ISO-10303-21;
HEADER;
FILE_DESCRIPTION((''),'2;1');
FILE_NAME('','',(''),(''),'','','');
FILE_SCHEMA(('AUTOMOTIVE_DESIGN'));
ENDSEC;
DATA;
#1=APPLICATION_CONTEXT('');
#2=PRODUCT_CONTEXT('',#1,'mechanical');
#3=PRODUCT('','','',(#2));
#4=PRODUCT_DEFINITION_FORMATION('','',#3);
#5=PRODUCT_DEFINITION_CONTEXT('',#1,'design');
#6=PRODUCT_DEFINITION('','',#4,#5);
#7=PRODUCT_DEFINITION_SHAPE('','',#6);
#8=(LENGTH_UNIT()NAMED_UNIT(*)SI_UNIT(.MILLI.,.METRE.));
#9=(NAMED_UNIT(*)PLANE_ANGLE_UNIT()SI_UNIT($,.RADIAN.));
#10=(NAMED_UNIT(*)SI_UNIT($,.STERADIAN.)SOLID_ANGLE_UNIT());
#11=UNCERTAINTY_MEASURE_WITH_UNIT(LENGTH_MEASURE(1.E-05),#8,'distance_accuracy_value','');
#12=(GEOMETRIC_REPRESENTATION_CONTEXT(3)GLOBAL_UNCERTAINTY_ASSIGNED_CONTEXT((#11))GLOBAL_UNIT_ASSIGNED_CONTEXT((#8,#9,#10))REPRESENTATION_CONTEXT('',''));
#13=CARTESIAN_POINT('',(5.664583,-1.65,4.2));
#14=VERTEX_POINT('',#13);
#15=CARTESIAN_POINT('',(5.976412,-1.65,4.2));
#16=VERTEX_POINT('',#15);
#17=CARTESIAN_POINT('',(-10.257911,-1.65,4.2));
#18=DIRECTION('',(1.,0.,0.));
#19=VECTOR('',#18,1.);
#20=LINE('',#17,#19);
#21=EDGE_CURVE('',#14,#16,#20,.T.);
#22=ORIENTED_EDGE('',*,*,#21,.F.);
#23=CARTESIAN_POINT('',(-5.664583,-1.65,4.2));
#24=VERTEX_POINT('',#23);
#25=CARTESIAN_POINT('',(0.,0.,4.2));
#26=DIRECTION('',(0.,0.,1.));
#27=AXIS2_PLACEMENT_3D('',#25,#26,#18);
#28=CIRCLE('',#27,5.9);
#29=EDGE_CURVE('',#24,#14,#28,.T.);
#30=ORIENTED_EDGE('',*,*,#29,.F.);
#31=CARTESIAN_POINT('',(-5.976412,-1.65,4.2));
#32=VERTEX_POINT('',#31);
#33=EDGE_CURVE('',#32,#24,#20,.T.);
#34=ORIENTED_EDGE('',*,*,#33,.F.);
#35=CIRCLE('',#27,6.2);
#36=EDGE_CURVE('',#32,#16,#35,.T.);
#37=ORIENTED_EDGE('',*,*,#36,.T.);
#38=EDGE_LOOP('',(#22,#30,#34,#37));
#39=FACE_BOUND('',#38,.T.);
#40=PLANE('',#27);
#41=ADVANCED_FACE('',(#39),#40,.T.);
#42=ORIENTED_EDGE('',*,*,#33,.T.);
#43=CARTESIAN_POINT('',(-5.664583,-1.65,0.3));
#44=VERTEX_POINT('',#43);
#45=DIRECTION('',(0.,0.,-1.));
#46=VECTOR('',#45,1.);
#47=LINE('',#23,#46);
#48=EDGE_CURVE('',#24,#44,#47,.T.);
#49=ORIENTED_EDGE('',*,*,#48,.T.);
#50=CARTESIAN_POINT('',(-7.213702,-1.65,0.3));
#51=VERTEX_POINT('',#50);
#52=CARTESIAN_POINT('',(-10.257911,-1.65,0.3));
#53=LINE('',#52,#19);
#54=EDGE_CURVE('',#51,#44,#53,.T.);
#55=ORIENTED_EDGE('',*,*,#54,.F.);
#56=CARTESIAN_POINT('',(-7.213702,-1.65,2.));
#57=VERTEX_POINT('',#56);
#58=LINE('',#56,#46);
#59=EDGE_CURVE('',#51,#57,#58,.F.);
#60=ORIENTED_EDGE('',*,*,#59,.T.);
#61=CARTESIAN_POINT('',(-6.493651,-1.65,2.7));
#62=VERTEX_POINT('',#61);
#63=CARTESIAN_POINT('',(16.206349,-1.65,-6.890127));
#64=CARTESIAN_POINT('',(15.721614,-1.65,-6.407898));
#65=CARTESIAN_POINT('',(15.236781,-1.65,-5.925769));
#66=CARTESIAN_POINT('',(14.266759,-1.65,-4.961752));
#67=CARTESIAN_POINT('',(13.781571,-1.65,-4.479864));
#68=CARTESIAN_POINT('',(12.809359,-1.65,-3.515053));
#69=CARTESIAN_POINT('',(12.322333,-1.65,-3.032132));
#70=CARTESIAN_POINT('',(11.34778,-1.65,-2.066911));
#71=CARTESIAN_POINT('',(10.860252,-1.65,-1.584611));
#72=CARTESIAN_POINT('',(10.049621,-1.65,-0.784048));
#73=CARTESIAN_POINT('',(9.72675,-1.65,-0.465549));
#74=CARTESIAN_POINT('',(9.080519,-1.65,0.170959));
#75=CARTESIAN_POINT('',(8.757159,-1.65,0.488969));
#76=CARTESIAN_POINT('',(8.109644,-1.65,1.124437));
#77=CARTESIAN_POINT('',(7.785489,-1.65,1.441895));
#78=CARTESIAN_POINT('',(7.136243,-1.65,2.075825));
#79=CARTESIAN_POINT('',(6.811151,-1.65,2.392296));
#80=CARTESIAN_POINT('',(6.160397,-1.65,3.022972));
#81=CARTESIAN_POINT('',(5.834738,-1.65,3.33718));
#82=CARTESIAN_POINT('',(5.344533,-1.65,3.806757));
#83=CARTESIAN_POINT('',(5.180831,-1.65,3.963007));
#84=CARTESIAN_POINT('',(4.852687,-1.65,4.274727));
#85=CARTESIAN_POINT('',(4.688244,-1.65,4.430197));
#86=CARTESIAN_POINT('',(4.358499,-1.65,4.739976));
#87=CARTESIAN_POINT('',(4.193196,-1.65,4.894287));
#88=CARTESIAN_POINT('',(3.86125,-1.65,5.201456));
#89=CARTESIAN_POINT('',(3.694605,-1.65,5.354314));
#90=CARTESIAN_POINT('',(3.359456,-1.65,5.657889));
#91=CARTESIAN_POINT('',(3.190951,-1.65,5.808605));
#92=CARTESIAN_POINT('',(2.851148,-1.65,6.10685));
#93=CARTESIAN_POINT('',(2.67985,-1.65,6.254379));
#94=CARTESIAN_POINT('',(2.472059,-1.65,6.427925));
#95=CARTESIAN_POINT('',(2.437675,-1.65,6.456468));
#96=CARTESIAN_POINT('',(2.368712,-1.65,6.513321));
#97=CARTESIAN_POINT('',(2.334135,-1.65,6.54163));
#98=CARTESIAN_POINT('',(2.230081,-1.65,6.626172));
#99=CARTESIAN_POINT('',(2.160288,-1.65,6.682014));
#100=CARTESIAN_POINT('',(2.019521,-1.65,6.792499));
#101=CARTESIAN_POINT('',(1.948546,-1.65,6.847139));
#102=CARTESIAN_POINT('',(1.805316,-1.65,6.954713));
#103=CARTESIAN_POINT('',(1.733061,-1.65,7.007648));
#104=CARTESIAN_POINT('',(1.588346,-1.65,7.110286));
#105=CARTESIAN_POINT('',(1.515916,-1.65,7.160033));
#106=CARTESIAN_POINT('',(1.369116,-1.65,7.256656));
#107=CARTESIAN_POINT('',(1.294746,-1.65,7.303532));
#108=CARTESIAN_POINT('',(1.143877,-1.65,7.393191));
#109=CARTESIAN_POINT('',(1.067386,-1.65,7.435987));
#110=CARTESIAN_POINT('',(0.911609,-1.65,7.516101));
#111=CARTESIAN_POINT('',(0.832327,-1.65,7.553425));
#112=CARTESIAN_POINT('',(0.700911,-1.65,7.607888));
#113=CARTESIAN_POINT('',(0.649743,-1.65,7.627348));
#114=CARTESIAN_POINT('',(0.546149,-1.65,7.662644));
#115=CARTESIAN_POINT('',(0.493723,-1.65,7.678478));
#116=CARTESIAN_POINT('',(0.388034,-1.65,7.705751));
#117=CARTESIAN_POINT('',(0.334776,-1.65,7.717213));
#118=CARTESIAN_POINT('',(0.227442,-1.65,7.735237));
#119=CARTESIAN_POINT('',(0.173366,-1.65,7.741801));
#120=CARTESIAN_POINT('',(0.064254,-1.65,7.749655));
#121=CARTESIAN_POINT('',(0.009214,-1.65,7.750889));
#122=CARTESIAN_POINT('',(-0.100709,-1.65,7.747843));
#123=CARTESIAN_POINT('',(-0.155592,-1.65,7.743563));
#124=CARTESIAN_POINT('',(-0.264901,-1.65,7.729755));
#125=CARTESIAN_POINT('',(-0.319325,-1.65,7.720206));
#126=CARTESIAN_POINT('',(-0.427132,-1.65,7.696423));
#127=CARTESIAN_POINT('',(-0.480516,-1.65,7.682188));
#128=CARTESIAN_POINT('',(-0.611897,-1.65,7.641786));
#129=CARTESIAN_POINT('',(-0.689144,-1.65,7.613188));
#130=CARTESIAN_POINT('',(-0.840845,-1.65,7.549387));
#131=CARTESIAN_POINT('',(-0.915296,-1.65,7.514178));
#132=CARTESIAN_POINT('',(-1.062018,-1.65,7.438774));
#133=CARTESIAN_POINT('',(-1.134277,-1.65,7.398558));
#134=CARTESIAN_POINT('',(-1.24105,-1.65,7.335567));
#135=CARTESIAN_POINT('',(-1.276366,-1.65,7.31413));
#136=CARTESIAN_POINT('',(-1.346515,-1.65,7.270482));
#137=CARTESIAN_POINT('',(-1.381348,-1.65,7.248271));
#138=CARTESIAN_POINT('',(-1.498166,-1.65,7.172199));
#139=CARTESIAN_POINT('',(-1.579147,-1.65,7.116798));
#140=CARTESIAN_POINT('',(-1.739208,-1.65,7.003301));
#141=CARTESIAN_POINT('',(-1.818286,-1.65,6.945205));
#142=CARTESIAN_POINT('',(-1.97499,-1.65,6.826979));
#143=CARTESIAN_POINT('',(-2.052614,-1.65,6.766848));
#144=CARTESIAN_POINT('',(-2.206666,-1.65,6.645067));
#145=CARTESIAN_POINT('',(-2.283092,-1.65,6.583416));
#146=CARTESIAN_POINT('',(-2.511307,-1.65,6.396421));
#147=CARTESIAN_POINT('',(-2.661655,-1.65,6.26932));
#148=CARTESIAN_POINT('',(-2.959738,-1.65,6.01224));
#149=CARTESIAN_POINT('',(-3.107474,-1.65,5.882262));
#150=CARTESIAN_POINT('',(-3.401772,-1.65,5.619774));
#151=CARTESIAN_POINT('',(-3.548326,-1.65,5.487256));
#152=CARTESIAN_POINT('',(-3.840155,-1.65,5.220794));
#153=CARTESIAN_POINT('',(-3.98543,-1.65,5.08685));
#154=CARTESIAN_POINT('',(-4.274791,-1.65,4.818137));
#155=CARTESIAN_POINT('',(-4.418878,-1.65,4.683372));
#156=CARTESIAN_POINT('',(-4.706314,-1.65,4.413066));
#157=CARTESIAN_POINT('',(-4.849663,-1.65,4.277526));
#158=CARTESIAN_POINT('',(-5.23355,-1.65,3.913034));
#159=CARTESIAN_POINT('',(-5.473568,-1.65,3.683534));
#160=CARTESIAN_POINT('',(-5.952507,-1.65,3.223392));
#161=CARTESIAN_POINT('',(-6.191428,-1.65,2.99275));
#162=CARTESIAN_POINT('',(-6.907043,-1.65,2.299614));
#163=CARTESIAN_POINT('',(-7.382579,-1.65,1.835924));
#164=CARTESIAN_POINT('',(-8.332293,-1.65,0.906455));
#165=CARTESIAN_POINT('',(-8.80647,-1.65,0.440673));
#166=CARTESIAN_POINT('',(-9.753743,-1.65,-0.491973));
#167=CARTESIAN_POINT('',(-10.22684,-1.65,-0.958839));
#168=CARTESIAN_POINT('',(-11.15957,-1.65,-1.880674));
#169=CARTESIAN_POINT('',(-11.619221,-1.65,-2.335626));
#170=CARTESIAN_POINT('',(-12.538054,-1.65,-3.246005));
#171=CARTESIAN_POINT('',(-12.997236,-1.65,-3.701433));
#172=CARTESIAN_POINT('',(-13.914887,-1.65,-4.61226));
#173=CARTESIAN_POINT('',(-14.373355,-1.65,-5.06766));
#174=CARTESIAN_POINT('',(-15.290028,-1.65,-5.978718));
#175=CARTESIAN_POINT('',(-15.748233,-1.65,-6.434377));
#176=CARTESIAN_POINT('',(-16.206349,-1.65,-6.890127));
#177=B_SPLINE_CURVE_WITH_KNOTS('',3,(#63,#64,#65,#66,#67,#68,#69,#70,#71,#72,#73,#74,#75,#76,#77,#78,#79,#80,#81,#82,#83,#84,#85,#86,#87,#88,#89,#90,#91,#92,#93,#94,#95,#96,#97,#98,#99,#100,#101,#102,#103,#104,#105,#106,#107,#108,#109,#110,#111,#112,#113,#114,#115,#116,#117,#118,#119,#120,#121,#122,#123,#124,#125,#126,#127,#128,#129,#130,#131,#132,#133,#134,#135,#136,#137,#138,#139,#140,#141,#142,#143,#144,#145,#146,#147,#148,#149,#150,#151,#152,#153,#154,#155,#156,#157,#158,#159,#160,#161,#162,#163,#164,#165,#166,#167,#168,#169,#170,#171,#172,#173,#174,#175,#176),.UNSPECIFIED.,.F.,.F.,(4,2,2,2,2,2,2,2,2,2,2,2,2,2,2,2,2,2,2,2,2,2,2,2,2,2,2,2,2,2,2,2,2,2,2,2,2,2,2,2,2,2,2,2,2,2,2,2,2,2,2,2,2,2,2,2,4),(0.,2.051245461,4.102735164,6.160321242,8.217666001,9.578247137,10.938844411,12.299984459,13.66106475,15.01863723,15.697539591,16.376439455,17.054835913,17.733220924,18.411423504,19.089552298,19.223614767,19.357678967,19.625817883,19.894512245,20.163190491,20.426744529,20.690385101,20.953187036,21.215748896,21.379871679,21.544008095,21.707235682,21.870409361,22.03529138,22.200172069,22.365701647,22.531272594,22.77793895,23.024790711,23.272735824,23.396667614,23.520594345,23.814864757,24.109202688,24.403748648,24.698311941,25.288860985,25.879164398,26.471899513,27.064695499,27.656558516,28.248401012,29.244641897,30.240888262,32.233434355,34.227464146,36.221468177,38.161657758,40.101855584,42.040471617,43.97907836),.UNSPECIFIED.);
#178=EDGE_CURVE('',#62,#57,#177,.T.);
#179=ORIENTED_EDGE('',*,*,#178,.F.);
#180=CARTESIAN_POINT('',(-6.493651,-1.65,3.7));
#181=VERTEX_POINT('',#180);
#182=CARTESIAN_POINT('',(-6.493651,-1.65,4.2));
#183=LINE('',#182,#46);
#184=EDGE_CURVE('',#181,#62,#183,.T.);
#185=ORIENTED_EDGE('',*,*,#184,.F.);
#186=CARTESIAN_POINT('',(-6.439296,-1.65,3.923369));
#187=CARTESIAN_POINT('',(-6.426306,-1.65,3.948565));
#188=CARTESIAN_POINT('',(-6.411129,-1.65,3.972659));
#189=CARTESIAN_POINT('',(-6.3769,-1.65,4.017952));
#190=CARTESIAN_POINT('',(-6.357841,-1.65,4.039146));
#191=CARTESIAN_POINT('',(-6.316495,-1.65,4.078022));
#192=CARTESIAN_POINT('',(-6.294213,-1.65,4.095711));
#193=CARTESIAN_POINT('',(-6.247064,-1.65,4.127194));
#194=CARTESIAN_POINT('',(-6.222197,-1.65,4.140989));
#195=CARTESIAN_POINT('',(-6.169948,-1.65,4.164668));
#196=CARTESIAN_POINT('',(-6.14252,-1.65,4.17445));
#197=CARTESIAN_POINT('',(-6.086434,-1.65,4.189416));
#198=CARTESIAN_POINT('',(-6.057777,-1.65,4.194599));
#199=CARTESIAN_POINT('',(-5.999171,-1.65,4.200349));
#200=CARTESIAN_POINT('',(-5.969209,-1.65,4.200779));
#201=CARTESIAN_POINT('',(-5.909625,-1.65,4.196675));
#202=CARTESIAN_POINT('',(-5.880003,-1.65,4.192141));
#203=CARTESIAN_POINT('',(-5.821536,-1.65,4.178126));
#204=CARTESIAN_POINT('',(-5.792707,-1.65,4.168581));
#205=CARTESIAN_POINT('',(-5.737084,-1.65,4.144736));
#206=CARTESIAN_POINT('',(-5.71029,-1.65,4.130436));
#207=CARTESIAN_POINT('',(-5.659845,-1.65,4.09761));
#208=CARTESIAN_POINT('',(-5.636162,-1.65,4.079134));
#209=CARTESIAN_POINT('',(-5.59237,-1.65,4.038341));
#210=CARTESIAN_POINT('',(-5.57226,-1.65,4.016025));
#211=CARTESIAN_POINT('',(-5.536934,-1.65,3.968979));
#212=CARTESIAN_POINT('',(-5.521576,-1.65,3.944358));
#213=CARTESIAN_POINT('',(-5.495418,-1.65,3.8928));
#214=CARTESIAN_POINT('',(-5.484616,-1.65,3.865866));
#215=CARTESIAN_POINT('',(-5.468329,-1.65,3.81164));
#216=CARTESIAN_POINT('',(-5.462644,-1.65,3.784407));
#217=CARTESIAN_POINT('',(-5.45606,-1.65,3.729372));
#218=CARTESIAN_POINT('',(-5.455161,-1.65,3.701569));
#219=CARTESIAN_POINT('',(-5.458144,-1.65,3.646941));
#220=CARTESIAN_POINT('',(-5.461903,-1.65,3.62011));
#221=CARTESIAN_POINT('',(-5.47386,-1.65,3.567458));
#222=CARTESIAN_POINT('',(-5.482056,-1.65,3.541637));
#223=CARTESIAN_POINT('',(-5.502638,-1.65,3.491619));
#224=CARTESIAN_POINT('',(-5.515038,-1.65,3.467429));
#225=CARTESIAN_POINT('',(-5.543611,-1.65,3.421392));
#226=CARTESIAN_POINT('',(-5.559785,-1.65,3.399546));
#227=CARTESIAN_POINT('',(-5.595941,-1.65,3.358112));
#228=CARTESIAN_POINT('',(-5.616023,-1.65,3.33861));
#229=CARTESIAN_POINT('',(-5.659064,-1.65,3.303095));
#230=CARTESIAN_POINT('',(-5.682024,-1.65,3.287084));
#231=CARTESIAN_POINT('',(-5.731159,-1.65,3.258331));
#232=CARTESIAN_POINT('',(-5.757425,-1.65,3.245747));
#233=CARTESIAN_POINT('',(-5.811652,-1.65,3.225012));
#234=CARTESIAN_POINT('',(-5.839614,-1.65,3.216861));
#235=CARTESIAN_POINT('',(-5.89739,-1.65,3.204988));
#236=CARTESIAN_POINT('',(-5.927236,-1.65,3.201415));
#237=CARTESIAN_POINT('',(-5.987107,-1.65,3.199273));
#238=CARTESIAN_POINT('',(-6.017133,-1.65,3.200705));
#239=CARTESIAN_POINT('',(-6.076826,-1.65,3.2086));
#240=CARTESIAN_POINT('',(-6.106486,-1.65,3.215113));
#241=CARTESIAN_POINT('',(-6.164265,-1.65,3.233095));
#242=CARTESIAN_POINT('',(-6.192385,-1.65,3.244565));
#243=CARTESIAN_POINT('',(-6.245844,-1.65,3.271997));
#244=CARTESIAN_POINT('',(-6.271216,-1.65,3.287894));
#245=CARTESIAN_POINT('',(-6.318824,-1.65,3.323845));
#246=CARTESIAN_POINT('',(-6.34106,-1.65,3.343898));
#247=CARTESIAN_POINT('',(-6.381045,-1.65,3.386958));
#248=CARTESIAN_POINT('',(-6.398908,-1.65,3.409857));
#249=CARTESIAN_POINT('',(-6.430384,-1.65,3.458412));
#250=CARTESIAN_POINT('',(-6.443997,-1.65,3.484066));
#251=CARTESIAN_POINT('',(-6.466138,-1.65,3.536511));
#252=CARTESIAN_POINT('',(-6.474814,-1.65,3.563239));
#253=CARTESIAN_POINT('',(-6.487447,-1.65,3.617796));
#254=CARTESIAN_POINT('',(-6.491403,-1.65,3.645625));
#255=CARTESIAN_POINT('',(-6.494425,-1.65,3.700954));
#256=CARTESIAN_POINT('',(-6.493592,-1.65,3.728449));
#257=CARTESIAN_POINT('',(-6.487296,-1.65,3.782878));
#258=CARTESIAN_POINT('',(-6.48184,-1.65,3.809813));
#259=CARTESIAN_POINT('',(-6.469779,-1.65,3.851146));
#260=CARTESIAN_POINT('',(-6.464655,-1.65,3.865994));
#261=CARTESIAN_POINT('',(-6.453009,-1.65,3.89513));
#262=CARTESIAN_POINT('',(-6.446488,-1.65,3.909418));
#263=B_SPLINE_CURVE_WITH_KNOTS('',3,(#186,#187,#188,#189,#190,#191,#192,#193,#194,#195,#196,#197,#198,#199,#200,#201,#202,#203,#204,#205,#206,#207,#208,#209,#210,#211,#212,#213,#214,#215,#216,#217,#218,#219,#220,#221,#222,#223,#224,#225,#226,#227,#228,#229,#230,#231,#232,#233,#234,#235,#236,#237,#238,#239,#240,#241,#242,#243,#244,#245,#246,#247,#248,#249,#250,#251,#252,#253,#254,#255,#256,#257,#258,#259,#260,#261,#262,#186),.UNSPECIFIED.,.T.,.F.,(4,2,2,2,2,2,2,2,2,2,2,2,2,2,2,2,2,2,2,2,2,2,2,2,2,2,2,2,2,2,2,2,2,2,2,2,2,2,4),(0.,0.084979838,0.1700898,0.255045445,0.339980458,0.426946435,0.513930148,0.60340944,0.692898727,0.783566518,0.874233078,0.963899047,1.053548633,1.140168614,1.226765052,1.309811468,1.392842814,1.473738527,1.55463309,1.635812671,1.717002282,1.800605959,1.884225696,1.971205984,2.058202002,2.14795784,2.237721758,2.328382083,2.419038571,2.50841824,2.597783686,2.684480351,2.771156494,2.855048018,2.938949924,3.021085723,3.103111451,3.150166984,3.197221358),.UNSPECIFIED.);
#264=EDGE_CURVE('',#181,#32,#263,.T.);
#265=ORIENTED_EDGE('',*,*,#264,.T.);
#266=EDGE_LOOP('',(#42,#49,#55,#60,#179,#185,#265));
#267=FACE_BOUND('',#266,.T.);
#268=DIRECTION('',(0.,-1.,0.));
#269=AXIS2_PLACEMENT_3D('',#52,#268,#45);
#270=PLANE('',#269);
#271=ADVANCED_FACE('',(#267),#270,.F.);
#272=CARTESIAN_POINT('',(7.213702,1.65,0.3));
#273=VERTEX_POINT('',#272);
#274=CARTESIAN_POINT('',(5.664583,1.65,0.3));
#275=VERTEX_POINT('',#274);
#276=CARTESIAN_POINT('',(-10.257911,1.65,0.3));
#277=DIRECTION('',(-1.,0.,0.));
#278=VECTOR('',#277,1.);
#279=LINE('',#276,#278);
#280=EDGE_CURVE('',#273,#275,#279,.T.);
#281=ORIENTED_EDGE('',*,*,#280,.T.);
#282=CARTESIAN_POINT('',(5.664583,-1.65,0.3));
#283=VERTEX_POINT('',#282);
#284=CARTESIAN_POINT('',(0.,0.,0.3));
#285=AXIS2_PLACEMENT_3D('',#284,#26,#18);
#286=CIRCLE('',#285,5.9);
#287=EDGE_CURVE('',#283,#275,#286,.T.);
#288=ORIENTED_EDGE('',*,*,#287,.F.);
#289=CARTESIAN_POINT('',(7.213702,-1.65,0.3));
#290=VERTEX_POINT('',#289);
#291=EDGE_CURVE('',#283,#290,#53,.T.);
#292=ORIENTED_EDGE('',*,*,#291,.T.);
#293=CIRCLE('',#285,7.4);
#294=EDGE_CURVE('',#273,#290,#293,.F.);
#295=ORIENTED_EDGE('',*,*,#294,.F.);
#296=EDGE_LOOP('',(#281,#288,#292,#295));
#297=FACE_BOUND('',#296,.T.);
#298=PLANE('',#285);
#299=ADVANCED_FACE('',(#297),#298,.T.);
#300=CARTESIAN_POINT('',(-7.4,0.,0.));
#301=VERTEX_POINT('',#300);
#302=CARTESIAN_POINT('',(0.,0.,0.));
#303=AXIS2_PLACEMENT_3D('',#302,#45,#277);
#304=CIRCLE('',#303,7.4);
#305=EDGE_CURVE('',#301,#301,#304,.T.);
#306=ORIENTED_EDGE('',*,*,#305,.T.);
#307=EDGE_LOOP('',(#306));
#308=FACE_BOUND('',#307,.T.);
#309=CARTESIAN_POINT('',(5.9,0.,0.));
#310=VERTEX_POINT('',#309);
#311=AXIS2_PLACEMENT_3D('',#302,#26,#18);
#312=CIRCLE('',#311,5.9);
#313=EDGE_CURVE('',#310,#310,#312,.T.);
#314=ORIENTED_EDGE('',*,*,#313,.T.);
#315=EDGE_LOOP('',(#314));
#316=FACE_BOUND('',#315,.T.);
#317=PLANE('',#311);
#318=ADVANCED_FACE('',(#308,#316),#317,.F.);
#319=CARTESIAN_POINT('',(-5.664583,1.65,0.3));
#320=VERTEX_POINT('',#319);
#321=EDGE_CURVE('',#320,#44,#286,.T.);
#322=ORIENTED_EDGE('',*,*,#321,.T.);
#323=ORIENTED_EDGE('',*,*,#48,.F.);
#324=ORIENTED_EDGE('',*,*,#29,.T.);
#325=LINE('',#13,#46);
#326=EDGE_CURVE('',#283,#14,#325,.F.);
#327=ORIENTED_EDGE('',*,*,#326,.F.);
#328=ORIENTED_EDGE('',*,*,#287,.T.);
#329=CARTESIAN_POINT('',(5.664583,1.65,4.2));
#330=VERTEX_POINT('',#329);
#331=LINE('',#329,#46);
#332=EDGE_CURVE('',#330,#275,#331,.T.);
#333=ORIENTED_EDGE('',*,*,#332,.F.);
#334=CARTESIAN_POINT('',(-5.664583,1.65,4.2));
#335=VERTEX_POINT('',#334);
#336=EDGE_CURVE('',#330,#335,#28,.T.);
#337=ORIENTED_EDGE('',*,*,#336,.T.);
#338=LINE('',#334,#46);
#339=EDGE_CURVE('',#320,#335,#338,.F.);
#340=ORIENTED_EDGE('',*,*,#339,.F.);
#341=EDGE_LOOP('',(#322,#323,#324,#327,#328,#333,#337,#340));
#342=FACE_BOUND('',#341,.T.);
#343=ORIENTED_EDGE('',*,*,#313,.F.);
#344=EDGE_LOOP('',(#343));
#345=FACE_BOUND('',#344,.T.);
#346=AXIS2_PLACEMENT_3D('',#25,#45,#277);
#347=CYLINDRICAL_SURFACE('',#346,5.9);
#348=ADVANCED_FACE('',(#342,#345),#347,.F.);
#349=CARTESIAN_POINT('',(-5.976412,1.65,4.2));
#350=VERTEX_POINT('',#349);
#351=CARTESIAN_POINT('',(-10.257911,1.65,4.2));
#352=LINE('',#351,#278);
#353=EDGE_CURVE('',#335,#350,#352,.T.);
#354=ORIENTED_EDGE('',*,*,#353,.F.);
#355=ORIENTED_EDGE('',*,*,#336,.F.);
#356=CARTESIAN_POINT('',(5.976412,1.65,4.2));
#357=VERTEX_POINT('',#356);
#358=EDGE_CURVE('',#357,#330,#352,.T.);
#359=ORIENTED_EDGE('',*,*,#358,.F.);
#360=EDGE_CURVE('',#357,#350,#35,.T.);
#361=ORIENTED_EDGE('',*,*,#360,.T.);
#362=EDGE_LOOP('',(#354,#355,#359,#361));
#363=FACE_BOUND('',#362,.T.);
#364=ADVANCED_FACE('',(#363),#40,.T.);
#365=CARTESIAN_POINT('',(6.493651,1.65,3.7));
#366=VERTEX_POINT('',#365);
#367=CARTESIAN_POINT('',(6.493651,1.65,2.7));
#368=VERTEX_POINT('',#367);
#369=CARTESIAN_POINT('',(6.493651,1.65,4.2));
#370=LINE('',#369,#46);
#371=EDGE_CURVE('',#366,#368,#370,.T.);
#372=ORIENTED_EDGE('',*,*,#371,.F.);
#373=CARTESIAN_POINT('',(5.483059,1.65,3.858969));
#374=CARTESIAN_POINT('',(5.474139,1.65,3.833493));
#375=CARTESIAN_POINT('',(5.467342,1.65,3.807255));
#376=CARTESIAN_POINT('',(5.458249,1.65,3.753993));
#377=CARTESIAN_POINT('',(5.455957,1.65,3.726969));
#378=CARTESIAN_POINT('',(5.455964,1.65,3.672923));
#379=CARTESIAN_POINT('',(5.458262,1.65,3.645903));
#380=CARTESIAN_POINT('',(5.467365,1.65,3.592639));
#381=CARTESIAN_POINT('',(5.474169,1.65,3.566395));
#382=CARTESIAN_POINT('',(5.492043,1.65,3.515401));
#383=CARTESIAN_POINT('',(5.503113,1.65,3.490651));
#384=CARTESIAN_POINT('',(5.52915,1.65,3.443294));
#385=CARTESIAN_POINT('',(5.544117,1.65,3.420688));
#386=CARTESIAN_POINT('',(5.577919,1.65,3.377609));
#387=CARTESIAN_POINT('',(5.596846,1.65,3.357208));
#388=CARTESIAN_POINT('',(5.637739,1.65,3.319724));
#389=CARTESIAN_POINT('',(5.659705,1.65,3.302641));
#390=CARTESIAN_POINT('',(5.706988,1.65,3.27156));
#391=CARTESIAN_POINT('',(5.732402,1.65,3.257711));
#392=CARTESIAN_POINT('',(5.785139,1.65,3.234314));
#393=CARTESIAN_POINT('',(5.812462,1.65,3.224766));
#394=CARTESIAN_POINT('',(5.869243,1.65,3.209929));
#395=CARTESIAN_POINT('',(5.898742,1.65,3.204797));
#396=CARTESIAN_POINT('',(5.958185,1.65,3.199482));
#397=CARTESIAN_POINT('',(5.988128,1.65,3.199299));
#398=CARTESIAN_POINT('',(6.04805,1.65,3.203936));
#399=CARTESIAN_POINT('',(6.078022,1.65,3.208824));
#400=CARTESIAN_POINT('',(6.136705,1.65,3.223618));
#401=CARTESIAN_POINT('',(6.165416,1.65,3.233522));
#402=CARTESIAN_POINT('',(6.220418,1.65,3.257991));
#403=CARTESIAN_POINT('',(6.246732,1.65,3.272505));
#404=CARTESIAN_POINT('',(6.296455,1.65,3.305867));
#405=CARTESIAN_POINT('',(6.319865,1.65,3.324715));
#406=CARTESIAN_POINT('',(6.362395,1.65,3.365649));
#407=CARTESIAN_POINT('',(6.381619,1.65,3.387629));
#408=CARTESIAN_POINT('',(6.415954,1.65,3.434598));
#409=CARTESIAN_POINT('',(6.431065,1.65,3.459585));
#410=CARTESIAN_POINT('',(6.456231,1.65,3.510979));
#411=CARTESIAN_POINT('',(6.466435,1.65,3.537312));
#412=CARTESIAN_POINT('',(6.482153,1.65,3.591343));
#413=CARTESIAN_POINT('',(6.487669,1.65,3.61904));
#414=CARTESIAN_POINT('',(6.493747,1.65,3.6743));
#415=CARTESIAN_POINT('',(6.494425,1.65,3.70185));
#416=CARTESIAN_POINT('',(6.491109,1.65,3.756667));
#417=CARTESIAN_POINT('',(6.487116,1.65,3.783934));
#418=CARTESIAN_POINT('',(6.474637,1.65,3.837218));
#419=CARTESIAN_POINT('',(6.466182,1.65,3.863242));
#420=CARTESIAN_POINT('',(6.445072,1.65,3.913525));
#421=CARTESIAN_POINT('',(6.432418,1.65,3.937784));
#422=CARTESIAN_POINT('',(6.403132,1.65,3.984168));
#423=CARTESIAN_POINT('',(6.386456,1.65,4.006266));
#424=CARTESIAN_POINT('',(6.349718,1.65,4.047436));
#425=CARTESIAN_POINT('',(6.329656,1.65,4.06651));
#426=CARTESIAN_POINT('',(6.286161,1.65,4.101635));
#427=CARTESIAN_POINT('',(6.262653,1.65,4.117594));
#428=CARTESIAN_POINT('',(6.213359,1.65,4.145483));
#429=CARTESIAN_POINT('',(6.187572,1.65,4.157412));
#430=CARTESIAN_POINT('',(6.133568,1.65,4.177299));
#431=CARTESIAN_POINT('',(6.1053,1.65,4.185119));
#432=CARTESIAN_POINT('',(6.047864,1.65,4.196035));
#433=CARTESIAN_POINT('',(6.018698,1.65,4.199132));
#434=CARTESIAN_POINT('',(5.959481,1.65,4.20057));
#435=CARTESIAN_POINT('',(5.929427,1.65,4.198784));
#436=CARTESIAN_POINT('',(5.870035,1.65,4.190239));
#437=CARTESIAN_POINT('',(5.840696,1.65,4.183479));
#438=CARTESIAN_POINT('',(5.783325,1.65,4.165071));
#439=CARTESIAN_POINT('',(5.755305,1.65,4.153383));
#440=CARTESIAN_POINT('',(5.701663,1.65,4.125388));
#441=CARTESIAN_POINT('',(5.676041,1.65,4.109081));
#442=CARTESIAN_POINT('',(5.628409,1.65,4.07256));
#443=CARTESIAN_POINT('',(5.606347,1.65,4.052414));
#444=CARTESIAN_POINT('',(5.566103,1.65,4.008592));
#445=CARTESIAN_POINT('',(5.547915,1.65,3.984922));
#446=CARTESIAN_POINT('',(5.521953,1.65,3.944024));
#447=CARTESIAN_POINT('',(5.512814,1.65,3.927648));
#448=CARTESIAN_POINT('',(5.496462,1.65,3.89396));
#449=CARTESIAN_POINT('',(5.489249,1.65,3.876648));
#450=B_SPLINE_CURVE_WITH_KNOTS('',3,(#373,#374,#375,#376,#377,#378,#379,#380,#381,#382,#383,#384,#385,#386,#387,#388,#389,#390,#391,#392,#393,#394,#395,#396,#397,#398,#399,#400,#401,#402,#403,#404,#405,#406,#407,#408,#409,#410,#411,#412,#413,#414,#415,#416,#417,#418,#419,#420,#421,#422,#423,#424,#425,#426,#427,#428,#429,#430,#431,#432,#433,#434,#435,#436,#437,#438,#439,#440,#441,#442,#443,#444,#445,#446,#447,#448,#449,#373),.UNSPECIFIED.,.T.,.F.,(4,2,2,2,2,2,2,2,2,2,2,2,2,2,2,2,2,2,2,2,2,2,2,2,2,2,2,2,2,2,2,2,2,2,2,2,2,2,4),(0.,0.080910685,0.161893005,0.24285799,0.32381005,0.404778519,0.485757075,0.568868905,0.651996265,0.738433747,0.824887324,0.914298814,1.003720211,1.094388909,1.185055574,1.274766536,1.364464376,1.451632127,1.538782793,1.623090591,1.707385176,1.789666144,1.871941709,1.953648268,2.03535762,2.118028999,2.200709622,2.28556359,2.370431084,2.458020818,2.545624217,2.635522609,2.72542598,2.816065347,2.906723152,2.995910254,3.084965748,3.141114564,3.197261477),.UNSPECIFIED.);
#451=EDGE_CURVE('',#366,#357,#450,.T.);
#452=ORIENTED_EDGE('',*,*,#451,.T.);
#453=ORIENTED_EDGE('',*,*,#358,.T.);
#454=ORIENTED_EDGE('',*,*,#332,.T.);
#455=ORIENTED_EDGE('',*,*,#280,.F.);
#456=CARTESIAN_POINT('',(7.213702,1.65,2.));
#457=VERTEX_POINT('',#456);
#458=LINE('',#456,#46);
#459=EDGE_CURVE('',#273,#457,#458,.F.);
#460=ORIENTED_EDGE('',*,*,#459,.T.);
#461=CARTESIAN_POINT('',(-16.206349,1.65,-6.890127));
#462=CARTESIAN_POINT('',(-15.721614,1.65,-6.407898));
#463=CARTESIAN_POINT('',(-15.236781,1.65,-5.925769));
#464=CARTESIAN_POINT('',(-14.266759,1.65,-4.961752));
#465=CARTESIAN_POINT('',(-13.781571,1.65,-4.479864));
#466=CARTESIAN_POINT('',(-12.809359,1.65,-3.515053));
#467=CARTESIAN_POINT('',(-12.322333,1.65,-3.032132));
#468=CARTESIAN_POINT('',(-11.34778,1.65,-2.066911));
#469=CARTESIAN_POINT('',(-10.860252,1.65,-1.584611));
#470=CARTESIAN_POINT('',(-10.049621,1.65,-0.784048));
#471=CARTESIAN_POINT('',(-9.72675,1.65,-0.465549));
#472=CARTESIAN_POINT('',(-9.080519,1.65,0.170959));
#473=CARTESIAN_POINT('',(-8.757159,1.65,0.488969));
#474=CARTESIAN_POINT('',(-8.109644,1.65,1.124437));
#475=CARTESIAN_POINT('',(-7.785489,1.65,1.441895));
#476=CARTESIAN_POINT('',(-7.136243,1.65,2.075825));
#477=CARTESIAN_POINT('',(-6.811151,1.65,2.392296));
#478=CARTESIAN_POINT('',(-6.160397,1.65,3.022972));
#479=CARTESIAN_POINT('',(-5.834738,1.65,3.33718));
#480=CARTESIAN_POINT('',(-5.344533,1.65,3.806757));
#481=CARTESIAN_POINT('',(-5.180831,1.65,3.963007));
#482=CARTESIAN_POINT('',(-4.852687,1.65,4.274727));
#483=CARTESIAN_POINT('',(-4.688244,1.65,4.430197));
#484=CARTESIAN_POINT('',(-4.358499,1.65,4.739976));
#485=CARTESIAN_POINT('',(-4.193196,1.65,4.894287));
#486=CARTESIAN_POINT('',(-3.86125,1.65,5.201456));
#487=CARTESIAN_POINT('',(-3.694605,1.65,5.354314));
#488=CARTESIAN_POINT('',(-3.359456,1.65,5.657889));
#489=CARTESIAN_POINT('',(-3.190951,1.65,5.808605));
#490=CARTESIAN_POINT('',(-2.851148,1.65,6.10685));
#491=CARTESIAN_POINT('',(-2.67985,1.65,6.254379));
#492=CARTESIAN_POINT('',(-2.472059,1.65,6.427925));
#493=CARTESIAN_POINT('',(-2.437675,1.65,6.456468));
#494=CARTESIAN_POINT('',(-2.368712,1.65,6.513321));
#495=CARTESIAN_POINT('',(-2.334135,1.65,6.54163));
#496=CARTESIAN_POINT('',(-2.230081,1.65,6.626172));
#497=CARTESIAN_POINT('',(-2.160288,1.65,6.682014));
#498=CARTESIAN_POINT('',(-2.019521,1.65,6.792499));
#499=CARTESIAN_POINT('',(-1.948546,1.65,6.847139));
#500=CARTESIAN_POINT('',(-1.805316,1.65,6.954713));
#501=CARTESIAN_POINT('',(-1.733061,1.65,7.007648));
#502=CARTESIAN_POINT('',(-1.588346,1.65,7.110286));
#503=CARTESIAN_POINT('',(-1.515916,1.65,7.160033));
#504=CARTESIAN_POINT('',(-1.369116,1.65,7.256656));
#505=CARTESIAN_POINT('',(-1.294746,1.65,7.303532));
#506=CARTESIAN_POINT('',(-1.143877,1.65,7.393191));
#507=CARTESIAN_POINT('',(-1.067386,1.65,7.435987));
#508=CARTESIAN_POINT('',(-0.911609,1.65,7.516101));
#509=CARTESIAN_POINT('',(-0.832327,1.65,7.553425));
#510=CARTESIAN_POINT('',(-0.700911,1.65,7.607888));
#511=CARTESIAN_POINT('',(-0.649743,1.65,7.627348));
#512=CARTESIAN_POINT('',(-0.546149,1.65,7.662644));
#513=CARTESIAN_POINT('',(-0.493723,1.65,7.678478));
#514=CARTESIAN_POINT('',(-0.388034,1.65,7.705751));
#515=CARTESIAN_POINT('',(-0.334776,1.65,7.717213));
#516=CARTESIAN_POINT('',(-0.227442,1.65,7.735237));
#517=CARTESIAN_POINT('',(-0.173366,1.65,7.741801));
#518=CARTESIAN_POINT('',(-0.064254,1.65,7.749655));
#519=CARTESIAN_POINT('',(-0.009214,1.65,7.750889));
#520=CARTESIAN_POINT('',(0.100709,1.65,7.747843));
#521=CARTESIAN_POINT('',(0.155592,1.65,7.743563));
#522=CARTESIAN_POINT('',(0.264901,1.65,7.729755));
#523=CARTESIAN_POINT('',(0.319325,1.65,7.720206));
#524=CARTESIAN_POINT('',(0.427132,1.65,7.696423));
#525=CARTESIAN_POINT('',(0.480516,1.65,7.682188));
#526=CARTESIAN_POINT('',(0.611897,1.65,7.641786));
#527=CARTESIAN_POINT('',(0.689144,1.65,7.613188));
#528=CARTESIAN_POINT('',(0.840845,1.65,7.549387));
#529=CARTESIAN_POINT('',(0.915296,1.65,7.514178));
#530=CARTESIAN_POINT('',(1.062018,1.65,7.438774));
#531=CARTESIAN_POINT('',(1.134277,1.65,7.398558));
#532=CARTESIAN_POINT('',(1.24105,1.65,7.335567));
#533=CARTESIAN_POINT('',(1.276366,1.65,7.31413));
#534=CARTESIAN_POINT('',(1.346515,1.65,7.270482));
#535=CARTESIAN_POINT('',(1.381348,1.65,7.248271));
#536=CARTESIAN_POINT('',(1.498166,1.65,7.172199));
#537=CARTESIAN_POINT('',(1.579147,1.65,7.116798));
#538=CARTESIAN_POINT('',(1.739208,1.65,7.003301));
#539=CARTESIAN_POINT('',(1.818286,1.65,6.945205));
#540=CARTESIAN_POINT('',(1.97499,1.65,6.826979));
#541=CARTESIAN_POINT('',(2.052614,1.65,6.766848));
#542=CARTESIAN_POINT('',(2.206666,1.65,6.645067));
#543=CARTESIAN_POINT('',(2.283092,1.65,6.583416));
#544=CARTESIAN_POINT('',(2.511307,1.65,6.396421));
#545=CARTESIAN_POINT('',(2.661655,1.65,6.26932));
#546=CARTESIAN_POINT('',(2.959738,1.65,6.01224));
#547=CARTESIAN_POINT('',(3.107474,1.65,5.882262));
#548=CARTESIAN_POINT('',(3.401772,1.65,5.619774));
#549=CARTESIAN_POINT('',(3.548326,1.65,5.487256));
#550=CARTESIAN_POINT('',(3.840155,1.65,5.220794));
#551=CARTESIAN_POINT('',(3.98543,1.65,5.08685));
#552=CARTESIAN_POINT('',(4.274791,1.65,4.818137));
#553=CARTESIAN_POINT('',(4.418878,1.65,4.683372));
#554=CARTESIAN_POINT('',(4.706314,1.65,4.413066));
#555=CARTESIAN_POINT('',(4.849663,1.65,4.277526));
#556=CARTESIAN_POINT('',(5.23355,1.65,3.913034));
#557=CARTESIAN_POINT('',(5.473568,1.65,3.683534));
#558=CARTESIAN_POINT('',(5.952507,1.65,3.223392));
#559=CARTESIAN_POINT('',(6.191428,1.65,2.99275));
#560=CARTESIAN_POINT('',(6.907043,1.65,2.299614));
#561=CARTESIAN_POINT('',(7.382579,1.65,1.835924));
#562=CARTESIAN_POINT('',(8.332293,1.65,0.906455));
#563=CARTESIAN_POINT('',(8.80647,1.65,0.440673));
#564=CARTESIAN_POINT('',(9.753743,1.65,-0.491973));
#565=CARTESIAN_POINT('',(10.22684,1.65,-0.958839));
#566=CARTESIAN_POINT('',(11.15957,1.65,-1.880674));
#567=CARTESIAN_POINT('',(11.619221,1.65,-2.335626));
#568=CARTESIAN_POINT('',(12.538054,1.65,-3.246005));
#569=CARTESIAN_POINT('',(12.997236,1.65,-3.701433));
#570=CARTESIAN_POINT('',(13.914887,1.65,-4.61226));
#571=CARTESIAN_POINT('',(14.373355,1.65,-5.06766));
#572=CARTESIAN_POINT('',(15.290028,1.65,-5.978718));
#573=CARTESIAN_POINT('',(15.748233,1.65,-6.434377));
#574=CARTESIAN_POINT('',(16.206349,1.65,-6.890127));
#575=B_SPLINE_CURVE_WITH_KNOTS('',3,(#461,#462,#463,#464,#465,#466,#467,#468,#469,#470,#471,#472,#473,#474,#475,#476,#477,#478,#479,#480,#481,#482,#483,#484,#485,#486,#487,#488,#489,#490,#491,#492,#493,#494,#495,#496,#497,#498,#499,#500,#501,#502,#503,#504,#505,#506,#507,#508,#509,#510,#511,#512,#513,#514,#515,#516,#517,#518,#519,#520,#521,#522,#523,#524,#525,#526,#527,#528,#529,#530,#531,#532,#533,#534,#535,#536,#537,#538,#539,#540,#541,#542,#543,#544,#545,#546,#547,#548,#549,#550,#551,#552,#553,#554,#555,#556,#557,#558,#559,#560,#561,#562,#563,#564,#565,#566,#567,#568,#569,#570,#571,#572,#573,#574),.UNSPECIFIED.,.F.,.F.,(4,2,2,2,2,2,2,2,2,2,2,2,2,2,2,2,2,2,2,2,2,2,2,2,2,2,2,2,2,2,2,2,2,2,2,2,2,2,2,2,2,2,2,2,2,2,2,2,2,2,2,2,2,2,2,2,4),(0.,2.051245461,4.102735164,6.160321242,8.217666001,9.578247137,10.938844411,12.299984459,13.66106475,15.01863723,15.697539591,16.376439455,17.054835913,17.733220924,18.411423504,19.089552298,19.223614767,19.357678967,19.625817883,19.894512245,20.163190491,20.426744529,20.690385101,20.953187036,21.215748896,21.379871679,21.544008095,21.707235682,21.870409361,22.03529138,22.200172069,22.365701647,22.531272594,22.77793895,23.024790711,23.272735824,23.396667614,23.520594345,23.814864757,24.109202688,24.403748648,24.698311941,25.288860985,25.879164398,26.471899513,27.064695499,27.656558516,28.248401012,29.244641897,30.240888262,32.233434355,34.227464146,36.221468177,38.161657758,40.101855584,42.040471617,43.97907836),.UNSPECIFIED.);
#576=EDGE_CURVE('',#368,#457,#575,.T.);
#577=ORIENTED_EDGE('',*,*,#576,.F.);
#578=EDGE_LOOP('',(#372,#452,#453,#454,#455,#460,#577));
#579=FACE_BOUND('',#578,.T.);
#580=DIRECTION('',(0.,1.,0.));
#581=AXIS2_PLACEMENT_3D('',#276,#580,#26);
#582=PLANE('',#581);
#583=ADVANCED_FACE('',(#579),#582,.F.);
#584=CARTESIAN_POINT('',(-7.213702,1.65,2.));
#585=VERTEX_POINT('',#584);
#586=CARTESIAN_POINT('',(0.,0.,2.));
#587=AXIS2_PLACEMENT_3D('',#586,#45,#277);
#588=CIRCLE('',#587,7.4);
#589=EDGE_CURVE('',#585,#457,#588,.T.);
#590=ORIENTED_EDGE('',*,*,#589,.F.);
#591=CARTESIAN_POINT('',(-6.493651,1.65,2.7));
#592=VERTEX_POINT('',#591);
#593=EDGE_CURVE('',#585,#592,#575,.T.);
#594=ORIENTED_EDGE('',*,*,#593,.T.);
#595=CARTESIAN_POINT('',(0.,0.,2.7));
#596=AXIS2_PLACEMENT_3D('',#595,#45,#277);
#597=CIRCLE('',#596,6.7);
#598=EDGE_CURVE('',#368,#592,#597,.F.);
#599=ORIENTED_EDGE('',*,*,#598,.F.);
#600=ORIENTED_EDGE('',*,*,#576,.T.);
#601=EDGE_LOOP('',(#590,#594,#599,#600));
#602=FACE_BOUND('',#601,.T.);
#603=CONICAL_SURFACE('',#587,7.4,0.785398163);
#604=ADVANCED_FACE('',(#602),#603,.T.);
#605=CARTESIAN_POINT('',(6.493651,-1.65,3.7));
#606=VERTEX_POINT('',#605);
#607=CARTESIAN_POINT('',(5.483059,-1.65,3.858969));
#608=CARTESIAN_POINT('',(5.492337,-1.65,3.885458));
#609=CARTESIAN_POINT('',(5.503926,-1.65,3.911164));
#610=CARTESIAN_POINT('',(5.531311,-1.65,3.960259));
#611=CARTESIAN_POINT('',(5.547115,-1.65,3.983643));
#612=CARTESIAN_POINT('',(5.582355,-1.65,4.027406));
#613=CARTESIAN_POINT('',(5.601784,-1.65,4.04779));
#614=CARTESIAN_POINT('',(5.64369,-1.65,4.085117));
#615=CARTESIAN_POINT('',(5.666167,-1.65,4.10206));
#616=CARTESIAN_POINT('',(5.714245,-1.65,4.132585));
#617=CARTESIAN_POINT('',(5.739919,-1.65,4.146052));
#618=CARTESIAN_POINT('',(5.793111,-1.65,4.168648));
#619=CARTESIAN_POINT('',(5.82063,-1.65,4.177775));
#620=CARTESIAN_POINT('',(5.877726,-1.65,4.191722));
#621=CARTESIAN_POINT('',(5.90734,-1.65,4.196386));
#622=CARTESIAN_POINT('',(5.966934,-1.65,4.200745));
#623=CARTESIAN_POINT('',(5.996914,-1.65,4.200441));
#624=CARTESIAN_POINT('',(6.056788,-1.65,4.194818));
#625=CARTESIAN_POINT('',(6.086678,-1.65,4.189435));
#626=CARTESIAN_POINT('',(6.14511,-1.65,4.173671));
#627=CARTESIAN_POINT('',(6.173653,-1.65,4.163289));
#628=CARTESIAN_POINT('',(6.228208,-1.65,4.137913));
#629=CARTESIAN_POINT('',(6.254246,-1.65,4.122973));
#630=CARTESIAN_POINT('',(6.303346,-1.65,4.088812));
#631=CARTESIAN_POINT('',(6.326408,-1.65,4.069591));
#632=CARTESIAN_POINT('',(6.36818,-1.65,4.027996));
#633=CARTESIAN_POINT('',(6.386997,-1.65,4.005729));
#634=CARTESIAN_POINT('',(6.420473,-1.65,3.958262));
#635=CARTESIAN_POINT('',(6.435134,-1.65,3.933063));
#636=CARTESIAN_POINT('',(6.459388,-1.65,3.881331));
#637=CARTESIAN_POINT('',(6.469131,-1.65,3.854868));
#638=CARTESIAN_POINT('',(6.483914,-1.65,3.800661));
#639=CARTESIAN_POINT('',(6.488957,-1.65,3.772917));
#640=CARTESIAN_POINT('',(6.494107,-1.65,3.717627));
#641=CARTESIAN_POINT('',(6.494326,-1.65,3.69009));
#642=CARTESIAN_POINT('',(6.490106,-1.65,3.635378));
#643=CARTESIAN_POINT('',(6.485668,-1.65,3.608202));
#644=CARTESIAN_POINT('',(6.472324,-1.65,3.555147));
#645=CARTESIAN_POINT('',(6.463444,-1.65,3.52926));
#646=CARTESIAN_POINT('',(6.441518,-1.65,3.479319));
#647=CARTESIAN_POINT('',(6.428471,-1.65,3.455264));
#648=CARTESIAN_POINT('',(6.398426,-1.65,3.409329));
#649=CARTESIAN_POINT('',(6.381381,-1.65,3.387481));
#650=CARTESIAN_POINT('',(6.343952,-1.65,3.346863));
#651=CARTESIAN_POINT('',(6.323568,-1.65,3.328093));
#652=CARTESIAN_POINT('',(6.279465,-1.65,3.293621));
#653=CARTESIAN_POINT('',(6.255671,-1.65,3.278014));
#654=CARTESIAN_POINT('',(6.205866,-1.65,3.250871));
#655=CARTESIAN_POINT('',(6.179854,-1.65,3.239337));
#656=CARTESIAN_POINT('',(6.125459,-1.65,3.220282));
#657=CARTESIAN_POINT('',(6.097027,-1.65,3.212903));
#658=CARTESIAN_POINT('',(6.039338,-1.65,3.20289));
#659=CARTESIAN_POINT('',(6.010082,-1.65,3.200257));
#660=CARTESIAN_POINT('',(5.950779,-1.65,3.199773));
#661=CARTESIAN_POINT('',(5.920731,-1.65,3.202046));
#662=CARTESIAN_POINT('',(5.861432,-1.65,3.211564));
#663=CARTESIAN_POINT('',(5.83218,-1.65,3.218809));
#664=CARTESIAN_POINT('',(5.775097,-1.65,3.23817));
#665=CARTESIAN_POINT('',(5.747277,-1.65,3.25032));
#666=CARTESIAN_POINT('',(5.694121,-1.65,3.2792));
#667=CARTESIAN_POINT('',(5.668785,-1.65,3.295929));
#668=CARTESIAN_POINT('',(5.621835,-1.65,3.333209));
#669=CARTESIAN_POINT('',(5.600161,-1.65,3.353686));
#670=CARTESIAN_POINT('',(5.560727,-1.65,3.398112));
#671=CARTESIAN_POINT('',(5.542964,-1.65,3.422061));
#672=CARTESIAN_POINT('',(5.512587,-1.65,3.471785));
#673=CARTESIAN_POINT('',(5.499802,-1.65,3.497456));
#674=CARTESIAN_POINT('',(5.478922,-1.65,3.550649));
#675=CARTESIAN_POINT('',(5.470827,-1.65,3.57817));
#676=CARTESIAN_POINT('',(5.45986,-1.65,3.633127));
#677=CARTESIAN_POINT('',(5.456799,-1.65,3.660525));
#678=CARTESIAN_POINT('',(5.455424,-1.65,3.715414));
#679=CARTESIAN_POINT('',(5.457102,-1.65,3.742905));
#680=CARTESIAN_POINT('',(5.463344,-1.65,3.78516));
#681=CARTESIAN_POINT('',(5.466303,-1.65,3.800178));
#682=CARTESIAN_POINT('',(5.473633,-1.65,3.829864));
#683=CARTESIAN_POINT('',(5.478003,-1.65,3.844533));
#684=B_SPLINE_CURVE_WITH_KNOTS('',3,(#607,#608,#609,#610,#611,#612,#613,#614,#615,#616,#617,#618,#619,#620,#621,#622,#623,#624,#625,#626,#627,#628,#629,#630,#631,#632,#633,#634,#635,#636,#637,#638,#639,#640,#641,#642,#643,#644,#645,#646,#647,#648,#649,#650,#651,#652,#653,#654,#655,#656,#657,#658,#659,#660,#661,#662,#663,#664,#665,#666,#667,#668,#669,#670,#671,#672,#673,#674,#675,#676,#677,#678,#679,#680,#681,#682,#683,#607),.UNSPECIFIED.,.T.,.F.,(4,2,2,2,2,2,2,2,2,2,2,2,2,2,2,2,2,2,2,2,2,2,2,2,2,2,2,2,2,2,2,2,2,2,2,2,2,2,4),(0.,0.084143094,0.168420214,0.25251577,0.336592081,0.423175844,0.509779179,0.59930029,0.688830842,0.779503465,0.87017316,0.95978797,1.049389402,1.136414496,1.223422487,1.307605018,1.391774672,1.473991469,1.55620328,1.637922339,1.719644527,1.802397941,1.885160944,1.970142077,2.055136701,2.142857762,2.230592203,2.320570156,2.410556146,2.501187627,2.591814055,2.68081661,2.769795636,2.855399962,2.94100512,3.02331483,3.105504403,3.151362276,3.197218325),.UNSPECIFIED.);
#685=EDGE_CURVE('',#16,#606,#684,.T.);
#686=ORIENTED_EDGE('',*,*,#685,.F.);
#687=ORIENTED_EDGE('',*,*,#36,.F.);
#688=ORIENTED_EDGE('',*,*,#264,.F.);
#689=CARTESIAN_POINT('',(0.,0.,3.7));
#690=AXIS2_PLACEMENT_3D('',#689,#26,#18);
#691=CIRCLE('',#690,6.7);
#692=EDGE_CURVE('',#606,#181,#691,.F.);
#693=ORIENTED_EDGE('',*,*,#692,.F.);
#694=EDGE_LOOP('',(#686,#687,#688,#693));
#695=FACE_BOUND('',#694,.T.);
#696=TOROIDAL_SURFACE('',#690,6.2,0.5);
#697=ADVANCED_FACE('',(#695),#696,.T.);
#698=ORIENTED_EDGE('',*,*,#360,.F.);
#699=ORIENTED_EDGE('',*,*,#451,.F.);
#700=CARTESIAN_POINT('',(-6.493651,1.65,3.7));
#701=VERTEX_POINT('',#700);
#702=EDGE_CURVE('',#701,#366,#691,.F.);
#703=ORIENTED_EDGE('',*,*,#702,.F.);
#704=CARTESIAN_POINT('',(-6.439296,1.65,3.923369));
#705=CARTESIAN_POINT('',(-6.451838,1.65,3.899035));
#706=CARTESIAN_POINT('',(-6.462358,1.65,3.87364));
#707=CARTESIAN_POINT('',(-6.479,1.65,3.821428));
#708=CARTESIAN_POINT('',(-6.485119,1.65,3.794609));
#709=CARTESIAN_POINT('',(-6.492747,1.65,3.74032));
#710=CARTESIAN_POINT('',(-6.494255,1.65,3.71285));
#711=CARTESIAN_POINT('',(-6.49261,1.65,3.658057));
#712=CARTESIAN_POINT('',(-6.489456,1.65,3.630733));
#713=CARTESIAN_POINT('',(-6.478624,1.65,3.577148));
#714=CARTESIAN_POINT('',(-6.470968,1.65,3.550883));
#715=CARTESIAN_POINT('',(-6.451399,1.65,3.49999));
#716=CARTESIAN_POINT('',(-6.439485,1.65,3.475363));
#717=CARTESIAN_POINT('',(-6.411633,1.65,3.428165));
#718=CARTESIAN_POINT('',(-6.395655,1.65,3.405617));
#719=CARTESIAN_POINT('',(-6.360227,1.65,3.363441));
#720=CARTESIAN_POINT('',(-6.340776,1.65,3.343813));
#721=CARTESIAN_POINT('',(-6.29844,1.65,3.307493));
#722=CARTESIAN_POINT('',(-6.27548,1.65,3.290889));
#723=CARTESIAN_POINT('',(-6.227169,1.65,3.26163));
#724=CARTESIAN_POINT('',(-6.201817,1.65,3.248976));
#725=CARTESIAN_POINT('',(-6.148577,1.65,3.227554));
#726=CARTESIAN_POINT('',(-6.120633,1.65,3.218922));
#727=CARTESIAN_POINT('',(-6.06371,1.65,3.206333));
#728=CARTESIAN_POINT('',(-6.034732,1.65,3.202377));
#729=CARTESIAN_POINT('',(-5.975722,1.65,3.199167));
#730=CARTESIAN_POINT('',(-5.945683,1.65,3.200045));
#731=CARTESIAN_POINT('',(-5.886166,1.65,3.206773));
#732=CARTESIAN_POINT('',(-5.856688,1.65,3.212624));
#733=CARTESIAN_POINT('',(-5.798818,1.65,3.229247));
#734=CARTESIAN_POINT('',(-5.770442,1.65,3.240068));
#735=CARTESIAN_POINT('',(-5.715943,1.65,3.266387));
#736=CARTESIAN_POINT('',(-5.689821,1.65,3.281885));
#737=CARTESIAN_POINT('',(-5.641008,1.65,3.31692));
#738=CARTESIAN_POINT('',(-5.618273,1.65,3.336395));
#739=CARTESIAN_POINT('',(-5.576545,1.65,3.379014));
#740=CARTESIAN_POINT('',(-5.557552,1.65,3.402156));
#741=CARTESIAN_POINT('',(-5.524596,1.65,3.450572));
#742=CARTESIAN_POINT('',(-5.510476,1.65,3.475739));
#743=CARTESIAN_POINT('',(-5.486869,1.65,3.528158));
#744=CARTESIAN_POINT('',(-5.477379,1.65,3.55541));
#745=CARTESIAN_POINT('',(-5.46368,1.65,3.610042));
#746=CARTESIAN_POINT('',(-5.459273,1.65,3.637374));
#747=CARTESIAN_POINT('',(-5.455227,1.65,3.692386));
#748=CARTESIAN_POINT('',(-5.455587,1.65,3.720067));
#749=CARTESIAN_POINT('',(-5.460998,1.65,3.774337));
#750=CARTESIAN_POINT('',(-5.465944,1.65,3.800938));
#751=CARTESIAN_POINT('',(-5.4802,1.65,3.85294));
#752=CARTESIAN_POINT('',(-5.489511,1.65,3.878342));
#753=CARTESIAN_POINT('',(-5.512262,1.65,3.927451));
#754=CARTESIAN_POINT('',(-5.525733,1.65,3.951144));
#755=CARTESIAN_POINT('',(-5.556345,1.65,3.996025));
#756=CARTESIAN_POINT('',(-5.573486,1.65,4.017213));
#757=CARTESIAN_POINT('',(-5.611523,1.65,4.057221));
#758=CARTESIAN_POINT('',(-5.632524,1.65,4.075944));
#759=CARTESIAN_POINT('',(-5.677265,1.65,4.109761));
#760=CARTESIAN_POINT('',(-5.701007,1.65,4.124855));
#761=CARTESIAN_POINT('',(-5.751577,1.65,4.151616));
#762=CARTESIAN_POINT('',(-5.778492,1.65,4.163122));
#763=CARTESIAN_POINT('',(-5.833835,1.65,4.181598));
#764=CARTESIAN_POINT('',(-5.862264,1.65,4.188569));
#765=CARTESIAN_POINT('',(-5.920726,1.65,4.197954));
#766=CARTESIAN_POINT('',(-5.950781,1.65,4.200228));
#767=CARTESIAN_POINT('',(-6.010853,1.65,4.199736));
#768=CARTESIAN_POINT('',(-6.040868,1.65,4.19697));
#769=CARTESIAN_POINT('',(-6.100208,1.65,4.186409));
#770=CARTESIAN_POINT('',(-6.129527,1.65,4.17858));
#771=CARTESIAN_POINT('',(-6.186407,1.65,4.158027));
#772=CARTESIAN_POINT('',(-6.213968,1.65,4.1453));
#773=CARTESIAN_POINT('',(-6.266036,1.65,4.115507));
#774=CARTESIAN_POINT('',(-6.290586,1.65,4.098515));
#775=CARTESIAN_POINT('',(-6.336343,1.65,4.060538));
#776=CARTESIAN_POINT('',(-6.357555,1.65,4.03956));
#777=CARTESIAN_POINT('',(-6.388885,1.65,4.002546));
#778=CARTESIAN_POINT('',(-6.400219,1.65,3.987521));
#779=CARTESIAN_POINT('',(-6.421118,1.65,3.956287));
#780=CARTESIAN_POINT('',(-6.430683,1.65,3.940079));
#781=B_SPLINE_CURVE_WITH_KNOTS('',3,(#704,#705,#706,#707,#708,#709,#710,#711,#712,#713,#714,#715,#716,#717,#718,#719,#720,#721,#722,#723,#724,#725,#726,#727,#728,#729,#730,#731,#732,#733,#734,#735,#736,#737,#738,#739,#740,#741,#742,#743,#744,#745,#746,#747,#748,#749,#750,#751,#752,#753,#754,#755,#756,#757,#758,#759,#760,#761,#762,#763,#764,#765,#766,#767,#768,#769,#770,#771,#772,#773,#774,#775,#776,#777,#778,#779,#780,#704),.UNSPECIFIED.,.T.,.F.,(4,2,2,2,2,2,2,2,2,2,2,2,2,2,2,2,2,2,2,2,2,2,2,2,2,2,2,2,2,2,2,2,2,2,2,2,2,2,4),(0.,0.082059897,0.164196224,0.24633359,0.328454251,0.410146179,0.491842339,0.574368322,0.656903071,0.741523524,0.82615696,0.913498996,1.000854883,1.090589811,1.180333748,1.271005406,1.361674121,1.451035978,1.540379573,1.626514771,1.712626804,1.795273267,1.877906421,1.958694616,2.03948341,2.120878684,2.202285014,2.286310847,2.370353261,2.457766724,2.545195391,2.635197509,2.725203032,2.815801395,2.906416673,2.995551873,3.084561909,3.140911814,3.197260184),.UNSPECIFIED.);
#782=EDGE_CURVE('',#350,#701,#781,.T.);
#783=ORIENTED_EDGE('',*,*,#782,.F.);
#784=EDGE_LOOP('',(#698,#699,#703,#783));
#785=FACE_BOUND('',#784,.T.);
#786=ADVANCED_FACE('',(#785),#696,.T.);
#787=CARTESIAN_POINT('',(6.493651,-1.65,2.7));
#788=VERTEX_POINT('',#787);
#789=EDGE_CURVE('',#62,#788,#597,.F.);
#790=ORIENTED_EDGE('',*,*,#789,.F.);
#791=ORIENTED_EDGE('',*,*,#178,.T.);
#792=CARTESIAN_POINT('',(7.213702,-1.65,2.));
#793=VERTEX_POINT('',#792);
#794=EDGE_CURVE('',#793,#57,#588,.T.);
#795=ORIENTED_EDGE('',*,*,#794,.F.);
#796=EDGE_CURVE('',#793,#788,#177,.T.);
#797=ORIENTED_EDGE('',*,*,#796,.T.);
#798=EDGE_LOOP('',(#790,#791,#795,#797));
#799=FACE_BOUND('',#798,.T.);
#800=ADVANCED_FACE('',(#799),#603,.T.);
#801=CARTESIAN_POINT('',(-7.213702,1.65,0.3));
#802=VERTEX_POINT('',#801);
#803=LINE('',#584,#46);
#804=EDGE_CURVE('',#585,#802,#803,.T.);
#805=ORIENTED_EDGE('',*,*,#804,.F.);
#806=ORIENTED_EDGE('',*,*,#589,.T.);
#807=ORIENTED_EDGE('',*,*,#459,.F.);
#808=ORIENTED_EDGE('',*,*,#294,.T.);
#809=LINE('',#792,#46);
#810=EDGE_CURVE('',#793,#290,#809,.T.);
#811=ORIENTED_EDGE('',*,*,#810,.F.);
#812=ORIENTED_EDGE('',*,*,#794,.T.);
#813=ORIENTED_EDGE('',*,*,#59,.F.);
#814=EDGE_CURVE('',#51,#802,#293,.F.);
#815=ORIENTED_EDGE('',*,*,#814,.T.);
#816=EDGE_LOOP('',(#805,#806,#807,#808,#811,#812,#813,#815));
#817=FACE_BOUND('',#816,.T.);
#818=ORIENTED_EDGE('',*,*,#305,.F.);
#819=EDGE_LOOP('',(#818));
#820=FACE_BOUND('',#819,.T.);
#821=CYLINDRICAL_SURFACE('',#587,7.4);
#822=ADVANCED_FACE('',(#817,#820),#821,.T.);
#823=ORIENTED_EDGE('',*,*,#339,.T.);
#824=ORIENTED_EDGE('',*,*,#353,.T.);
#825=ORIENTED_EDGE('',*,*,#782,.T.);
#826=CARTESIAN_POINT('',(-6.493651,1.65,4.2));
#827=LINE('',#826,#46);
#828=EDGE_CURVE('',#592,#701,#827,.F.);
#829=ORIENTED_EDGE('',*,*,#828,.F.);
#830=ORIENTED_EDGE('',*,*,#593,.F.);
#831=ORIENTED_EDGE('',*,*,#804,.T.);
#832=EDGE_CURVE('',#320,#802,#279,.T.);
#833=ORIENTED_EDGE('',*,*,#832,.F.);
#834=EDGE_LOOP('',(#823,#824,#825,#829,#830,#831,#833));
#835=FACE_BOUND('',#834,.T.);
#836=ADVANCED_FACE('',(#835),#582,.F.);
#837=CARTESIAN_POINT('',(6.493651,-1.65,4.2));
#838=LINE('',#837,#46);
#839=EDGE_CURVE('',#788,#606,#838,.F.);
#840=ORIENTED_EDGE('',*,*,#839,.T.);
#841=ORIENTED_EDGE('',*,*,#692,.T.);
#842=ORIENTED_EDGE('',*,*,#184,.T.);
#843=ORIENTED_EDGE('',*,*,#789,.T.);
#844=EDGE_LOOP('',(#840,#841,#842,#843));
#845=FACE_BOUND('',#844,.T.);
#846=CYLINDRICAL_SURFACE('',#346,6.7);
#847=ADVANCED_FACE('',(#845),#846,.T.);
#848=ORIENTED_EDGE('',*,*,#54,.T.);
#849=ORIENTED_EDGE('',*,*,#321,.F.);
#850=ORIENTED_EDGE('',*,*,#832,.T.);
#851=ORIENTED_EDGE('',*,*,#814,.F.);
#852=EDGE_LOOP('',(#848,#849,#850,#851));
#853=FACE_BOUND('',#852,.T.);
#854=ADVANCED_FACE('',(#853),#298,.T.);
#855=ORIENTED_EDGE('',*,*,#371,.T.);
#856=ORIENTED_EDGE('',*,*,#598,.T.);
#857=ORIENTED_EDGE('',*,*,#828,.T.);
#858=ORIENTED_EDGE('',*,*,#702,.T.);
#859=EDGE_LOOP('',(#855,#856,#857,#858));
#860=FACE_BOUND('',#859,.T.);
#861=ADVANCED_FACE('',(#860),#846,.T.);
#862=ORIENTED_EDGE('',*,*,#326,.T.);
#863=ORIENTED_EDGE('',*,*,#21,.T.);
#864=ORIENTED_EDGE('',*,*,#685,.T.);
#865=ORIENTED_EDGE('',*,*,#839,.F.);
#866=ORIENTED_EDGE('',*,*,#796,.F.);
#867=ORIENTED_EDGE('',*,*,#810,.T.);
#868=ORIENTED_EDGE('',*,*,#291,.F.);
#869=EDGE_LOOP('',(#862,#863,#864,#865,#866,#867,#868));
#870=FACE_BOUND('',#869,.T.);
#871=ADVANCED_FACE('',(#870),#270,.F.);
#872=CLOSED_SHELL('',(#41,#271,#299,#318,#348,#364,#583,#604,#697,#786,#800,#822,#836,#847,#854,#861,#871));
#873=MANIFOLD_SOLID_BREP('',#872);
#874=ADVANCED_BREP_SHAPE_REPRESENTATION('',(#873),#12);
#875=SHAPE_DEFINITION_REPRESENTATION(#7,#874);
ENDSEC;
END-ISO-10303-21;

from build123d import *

# Parameters (mm, degrees)
CROQUIS1_R              = 6.7
CROQUIS1_R_2            = 5.9
SALIENTE_EXTRUIR1_DEPTH = 4.2
CROQUIS3_R              = 7.4
CROQUIS3_R_2            = 5.9
SALIENTE_EXTRUIR2_DEPTH = 2
REDONDEO1_R             = 0.5
CHAFL_N1_SIZE           = 0.7
CROQUIS2_W              = 20.515822
CROQUIS2_H              = 3.3
CORTAR_EXTRUIR1_DEPTH   = 3.9


with BuildPart() as part:
    # Croquis1 → Saliente-Extruir1 (new body)
    with BuildSketch(Plane.XY):
        Circle(CROQUIS1_R)
        Circle(CROQUIS1_R_2, mode=Mode.SUBTRACT)
    extrude(amount=SALIENTE_EXTRUIR1_DEPTH)

    # Croquis3 → Saliente-Extruir2 (add)
    with BuildSketch(Plane(origin=(0, 0, 0), x_dir=(-1, 0, 0), z_dir=(0, 0, -1))):
        Circle(CROQUIS3_R)
        with Locations(Location((0, 0, 0), (0, 0, 180))):
            Circle(CROQUIS3_R_2, mode=Mode.SUBTRACT)
    extrude(amount=-SALIENTE_EXTRUIR2_DEPTH)

    # Redondeo1
    redondeo1_edges = [part.edges().sort_by_distance(p)[0] for p in [
        (-6.7, 0, 4.2),
    ]]
    fillet(redondeo1_edges, radius=REDONDEO1_R)

    # Chaflán1
    chafl_n1_edges = [part.edges().sort_by_distance(p)[0] for p in [
        (-6.7, 0, 2),
    ]]
    chamfer(chafl_n1_edges, length=CHAFL_N1_SIZE - 0.0001)  # a hair under: the kernel refuses the full size

    # Croquis2 → Cortar-Extruir1 (cut)
    with BuildSketch(Plane.XY.offset(4.2)):
        Rectangle(CROQUIS2_W, CROQUIS2_H)
    extrude(amount=-CORTAR_EXTRUIR1_DEPTH, mode=Mode.SUBTRACT)


solid = part.part
